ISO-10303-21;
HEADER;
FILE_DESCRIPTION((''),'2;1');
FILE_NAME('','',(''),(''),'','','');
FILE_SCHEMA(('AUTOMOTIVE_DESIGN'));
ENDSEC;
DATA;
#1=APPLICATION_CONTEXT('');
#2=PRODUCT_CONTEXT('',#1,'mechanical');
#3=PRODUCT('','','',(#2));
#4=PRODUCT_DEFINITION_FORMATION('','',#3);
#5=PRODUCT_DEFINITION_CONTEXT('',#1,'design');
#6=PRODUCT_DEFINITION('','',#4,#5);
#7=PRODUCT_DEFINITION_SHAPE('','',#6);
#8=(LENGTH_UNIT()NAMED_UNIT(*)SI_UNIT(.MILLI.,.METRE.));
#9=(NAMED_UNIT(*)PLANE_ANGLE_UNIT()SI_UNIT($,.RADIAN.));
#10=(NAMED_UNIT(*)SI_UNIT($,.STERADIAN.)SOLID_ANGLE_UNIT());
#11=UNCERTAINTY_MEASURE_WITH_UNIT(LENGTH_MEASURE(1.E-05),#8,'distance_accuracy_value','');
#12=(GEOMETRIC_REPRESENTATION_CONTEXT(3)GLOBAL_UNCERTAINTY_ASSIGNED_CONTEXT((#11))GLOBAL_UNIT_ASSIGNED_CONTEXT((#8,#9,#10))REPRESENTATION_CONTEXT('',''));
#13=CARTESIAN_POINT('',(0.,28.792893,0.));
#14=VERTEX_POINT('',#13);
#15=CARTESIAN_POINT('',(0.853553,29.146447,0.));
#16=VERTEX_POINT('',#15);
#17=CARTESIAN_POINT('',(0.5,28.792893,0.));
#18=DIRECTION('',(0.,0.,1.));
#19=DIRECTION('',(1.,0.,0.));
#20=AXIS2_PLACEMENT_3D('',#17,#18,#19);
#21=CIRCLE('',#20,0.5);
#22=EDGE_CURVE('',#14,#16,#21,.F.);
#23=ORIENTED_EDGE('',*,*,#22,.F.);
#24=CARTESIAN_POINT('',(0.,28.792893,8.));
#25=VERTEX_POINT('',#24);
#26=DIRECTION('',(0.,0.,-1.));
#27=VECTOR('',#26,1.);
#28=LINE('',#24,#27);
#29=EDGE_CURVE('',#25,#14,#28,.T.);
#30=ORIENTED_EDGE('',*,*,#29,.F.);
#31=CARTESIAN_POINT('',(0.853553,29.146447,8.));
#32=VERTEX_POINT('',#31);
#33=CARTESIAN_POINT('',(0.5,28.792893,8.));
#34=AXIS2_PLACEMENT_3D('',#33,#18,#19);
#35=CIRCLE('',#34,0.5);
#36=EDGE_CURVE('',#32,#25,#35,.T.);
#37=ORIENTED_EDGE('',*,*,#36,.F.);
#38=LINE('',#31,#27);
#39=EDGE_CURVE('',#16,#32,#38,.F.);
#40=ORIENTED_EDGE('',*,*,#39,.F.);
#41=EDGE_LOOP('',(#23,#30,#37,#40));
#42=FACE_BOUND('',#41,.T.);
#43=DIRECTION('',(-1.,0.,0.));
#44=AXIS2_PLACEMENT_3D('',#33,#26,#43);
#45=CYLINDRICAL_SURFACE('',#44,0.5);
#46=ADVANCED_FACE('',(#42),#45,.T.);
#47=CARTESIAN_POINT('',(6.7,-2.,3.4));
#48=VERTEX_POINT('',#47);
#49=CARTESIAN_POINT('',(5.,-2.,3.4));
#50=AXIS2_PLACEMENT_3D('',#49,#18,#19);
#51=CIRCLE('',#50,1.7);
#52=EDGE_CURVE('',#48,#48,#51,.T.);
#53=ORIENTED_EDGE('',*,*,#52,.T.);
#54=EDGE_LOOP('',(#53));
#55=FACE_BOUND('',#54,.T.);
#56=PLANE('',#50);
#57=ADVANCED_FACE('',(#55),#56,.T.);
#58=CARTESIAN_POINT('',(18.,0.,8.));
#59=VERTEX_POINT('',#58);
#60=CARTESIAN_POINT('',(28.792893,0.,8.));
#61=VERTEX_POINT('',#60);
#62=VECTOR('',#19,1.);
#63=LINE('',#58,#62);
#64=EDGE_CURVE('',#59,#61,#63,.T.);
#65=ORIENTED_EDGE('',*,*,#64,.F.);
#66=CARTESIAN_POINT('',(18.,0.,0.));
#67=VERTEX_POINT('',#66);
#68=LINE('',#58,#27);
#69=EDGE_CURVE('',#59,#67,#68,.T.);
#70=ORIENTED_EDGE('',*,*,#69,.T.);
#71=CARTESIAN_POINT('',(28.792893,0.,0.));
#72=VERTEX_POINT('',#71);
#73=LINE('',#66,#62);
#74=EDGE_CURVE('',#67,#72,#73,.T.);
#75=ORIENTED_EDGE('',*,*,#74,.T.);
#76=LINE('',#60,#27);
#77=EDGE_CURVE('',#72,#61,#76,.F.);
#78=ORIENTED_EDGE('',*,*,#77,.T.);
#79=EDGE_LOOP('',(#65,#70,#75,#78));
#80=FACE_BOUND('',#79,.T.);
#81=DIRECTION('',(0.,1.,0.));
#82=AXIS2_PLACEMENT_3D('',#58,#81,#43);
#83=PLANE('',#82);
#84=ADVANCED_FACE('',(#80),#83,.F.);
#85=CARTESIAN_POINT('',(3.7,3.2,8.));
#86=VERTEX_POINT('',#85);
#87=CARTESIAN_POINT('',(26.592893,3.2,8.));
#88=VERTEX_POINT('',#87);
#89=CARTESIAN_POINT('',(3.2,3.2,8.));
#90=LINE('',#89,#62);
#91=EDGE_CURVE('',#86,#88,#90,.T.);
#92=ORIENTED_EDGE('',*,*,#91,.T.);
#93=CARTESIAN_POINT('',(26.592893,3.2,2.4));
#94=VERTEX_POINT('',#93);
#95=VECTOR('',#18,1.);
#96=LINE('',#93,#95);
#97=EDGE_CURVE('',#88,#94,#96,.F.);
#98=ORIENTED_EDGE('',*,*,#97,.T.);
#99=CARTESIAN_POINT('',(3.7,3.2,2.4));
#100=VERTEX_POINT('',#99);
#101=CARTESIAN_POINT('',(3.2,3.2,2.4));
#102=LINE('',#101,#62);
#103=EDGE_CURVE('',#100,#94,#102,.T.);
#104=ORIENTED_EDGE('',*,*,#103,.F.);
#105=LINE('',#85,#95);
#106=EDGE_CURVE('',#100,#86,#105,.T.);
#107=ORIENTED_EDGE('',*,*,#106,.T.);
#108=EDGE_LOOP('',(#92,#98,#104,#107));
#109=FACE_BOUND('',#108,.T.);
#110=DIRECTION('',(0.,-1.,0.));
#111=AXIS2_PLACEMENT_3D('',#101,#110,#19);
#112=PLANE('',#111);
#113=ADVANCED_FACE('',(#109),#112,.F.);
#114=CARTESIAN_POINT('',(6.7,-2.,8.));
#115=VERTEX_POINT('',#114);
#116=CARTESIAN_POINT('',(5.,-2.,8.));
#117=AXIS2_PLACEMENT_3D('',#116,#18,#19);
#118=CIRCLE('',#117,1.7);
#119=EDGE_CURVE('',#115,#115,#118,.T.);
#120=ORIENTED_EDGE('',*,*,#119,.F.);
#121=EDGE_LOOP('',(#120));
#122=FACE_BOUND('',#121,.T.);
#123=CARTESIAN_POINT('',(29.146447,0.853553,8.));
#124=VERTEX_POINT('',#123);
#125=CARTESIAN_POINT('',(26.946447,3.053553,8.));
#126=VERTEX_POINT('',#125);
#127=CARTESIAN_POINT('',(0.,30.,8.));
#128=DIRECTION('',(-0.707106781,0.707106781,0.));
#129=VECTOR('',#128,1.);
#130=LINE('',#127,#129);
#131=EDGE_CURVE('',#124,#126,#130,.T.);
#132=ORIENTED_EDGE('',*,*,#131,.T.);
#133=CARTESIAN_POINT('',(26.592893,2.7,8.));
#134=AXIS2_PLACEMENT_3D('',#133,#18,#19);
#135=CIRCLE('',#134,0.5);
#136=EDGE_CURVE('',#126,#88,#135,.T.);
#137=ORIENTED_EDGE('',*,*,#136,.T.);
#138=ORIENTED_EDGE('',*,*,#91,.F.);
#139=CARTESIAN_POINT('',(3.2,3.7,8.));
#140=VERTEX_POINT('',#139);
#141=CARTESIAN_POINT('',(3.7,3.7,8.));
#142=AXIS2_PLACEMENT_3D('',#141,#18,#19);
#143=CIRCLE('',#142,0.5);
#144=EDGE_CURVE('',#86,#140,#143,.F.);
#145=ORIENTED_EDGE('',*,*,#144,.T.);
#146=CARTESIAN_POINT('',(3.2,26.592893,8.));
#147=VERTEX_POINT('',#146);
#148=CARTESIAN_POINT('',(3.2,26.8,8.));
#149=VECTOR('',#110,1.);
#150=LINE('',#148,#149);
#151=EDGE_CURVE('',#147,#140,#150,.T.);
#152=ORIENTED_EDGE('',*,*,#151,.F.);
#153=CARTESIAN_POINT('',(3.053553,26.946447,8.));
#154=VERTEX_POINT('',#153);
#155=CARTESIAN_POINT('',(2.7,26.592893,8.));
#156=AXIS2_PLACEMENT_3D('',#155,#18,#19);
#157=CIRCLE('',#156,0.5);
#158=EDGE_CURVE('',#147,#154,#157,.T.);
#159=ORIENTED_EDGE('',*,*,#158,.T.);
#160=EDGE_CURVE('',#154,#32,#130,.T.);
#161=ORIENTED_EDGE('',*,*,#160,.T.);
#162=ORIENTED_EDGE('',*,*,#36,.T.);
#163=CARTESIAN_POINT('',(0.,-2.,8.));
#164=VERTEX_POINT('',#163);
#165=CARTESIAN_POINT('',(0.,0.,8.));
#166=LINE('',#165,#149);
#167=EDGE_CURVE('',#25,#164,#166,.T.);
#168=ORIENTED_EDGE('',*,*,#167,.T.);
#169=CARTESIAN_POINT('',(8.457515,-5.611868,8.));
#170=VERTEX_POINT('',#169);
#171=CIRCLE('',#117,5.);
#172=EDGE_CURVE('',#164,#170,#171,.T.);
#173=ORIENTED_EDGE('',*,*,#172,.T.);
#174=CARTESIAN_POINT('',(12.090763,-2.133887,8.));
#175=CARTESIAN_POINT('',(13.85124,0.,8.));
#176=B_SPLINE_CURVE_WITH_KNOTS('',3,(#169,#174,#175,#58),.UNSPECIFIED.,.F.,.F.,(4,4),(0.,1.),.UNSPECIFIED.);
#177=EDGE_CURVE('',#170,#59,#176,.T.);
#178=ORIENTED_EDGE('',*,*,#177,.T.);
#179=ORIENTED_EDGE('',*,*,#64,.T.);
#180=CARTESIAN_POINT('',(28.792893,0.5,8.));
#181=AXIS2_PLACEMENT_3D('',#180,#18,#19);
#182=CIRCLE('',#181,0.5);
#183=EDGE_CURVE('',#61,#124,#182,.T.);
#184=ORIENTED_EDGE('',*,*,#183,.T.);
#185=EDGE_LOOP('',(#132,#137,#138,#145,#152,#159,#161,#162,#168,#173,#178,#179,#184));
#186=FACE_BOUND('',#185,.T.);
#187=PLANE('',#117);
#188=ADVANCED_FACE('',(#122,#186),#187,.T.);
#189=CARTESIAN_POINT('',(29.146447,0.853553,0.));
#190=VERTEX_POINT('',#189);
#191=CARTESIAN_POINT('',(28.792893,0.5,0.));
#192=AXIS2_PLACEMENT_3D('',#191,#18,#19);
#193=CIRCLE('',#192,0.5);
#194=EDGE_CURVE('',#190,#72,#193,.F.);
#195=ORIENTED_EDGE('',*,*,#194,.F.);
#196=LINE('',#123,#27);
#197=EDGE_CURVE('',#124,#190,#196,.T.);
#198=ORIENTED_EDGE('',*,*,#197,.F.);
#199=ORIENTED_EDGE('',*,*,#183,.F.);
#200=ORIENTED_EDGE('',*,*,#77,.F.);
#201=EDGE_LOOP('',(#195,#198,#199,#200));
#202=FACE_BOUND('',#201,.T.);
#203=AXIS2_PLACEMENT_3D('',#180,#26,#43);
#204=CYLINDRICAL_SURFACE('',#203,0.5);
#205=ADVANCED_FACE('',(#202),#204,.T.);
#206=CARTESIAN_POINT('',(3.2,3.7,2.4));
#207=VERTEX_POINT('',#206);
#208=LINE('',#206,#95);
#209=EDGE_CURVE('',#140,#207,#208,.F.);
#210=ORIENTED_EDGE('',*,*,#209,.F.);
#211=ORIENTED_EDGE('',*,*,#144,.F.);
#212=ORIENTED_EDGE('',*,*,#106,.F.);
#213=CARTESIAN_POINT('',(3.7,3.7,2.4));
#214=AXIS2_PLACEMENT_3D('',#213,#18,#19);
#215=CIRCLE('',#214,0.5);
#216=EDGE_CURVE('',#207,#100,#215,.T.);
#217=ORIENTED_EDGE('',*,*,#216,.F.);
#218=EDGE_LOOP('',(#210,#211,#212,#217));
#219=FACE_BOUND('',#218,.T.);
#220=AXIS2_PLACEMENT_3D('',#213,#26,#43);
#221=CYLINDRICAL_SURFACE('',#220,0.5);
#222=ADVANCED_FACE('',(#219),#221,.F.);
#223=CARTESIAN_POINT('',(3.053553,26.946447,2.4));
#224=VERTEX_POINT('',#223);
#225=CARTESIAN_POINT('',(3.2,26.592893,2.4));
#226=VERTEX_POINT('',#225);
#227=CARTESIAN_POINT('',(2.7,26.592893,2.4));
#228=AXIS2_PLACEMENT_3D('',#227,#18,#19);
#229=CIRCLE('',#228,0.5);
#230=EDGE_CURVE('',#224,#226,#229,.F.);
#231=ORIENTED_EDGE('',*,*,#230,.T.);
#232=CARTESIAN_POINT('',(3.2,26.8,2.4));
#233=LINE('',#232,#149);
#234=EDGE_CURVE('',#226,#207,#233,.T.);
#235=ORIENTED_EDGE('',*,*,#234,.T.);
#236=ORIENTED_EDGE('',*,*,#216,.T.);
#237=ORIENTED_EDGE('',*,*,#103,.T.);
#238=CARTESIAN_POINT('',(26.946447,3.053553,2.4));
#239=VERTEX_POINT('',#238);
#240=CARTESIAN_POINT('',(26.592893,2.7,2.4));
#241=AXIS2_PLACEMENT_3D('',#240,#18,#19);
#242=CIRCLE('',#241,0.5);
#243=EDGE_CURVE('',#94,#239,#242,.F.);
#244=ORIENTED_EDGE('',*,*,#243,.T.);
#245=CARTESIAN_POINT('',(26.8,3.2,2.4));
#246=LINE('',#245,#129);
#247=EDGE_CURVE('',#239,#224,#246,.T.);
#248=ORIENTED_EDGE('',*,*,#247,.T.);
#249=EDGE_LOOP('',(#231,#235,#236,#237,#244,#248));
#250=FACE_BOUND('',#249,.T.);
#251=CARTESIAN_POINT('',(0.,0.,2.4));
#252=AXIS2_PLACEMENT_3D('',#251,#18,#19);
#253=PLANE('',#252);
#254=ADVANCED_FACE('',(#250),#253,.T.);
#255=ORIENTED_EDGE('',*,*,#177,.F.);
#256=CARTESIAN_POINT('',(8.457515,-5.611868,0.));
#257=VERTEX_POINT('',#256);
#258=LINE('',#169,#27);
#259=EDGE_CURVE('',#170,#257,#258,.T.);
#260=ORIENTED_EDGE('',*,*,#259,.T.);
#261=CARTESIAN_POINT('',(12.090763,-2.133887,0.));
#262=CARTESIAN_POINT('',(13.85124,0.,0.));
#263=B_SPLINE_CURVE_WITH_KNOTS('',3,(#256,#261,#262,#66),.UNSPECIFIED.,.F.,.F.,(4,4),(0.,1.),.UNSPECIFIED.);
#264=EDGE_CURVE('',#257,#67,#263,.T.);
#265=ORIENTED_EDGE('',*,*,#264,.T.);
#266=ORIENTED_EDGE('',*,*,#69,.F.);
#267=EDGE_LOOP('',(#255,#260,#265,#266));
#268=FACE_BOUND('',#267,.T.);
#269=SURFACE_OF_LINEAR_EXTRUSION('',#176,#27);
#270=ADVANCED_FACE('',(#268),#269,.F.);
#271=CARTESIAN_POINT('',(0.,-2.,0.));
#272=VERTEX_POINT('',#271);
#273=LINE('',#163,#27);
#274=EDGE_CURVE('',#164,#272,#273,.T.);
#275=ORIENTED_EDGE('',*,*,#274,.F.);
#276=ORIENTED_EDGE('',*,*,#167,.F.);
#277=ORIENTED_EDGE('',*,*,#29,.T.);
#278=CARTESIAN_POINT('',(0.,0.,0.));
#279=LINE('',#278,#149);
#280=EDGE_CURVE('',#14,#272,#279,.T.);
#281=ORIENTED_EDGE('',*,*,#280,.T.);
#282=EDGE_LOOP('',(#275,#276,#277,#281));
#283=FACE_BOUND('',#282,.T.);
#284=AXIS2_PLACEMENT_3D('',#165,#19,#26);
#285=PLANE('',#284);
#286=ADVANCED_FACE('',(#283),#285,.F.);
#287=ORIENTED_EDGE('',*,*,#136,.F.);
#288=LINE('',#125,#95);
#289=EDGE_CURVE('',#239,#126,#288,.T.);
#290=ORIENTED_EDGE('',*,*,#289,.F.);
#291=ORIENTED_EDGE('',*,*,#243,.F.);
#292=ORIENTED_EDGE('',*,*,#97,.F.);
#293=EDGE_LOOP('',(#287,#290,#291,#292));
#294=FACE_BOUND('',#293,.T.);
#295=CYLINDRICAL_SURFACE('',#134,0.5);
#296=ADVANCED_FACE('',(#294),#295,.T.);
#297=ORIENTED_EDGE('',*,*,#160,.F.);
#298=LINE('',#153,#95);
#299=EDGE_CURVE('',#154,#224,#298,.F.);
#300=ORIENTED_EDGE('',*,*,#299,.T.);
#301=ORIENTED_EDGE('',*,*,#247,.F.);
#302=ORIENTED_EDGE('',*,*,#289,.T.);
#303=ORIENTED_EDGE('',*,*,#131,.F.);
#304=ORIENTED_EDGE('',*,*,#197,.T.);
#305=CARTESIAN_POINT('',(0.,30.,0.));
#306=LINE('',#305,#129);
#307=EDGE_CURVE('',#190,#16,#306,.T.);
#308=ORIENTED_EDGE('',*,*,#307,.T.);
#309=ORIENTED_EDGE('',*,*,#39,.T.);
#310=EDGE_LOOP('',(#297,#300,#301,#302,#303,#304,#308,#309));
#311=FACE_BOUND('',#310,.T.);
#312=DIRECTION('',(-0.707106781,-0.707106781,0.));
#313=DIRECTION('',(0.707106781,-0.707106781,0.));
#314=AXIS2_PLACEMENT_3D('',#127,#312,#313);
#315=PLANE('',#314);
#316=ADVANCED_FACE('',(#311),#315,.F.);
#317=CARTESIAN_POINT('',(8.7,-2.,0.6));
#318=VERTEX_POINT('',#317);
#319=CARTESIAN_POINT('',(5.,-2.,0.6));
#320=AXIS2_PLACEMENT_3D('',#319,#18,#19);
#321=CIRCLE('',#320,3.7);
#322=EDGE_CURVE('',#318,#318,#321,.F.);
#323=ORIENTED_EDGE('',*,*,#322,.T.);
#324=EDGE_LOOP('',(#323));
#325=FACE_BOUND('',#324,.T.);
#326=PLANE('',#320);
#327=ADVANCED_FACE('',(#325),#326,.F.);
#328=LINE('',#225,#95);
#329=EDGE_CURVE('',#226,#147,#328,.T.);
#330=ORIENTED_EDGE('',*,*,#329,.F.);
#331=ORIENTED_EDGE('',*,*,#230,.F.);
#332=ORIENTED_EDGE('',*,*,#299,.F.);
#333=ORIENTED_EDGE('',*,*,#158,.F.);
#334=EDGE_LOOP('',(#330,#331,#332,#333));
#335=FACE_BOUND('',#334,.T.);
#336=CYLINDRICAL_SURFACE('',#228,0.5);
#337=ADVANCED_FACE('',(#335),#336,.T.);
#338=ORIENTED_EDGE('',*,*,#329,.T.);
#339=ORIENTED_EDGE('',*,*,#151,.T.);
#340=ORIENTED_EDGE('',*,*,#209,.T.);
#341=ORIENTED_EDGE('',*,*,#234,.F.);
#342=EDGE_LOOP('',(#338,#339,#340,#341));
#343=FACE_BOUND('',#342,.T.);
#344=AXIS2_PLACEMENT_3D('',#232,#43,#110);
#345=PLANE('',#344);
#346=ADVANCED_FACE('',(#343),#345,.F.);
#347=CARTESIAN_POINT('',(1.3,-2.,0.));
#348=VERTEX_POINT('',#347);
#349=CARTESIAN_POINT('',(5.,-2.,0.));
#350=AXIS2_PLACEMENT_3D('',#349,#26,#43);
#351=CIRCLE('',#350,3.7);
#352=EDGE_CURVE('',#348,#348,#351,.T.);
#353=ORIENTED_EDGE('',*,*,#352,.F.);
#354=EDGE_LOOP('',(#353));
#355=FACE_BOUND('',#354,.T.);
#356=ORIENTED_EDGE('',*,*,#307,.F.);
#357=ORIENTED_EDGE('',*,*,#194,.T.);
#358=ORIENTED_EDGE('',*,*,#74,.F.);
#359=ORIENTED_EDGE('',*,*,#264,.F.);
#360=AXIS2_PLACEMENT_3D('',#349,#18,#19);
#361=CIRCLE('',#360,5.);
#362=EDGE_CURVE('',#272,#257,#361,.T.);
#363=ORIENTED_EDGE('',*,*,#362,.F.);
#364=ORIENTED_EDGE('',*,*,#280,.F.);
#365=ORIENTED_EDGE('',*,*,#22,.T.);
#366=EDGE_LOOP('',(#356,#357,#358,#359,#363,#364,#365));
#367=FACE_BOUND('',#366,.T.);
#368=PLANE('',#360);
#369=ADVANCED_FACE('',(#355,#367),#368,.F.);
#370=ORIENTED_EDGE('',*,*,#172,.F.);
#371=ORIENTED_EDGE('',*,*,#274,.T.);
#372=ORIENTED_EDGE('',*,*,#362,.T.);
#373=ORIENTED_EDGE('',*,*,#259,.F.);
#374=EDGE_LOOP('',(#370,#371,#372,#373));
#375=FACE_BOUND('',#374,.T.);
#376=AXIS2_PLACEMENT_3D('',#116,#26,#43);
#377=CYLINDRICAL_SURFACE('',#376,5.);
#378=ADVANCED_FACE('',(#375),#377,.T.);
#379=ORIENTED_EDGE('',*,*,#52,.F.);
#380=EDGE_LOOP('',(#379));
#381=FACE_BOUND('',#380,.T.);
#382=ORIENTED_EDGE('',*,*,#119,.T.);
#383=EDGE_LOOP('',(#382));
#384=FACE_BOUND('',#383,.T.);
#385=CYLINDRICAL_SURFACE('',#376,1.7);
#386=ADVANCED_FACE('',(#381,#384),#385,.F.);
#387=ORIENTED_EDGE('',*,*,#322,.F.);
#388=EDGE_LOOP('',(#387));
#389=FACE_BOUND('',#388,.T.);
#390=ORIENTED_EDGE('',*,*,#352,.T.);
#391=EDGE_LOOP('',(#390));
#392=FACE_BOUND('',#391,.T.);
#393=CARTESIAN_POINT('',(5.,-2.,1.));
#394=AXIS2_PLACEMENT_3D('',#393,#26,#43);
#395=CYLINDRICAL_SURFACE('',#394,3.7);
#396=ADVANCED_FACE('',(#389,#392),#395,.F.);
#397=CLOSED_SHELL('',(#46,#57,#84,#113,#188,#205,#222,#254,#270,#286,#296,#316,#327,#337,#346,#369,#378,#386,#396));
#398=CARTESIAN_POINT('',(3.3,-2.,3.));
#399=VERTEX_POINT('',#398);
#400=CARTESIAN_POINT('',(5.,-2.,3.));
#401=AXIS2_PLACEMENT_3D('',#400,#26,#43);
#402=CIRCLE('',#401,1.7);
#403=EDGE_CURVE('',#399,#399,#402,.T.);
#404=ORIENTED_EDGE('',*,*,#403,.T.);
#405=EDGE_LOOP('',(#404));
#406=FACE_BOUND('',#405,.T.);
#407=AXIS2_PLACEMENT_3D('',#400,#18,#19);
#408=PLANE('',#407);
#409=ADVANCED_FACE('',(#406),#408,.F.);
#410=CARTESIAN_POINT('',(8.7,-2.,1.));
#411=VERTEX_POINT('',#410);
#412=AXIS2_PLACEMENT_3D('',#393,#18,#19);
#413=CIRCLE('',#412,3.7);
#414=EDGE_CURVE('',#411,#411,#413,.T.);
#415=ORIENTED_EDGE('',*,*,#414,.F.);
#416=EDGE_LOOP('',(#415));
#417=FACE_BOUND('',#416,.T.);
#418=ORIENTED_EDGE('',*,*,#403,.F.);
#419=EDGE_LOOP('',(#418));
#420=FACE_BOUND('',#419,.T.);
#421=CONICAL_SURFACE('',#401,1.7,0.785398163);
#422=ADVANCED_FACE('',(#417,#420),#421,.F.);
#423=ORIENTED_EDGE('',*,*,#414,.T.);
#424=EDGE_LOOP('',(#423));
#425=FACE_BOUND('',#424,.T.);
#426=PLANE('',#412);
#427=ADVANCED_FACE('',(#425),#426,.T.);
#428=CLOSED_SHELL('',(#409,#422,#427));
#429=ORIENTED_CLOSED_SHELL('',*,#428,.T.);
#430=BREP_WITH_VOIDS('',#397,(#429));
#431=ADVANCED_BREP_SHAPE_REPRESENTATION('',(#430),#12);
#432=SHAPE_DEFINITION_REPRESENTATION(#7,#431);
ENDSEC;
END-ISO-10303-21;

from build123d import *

# Parameters (mm, degrees)
SKETCH1_R           = 1.7
BOSS_EXTRUDE1_DEPTH = 8
CUT_EXTRUDE1_DEPTH  = 5.6
FILLET1_R           = 0.5
SKETCH5_R           = 3.7
CUT_EXTRUDE2_DEPTH  = 1
CHAMFER1_SIZE       = 2
SKETCH6_R           = 1.7
BOSS_EXTRUDE2_DEPTH = 0.4
BOSS_EXTRUDE3_START = -0.4
SKETCH7_R           = 3.7
BOSS_EXTRUDE3_DEPTH = 0.4


with BuildPart() as part:
    # Sketch1 → Boss-Extrude1 (new body)
    with BuildSketch(Plane.XY):
        with BuildLine():
            Line((0, 0), (0, 30))
            Line((0, 30), (30, 0))
            Line((30, 0), (18, 0))
            add(Edge.make_bspline(
                [(18, 0), (13.851240238, 0), (12.090763012, -2.133887147), (8.457514689, -5.611868239)],
                knots=[0, 0, 0, 0, 1, 1, 1, 1], degree=3))
            ThreePointArc((8.457514689, -5.611868239), (3.036275661, -6.598237349), (0, -2))
            Line((0, -2), (0, 0))
        make_face()
        with Locations((5, -2)):
            Circle(SKETCH1_R, mode=Mode.SUBTRACT)
    extrude(amount=BOSS_EXTRUDE1_DEPTH)

    # Sketch2 → Cut-Extrude1 (cut)
    with BuildSketch(Plane.XY.offset(8)):
        Polygon((3.2, 26.8), (3.2, 3.2), (26.8, 3.2), align=None)
    extrude(amount=-CUT_EXTRUDE1_DEPTH, mode=Mode.SUBTRACT)

    # Fillet1
    fillet1_edges = [part.edges().sort_by_distance(p)[0] for p in [
        (0, 30, 4),
        (30, 0, 4),
        (3.2, 26.8, 5.2),
        (26.8, 3.2, 5.2),
        (3.2, 3.2, 5.2),
    ]]
    fillet(fillet1_edges, radius=FILLET1_R)

    # Sketch5 → Cut-Extrude2 (cut)
    with BuildSketch(Plane(origin=(0, 0, 0), x_dir=(-1, 0, 0), z_dir=(0, 0, -1))):
        with Locations((-5, -2)):
            Circle(SKETCH5_R)
    extrude(amount=-CUT_EXTRUDE2_DEPTH, mode=Mode.SUBTRACT)

    # Chamfer1
    chamfer1_edges = [part.edges().sort_by_distance(p)[0] for p in [
        (3.3, -2, 1),
    ]]
    chamfer(chamfer1_edges, length=CHAMFER1_SIZE - 0.0001)  # a hair under: the kernel refuses the full size

    # Sketch6 → Boss-Extrude2 (add)
    with BuildSketch(Plane.XY.offset(3)):
        with Locations((5, -2)):
            Circle(SKETCH6_R)
    extrude(amount=BOSS_EXTRUDE2_DEPTH)

    # Sketch7 → Boss-Extrude3 (add)
    with BuildSketch(Plane.XY.offset(1).offset(BOSS_EXTRUDE3_START)):
        with Locations(Location((5, -2, 0), (0, 0, 180))):
            Circle(SKETCH7_R)
    extrude(amount=BOSS_EXTRUDE3_DEPTH)


solid = part.part
